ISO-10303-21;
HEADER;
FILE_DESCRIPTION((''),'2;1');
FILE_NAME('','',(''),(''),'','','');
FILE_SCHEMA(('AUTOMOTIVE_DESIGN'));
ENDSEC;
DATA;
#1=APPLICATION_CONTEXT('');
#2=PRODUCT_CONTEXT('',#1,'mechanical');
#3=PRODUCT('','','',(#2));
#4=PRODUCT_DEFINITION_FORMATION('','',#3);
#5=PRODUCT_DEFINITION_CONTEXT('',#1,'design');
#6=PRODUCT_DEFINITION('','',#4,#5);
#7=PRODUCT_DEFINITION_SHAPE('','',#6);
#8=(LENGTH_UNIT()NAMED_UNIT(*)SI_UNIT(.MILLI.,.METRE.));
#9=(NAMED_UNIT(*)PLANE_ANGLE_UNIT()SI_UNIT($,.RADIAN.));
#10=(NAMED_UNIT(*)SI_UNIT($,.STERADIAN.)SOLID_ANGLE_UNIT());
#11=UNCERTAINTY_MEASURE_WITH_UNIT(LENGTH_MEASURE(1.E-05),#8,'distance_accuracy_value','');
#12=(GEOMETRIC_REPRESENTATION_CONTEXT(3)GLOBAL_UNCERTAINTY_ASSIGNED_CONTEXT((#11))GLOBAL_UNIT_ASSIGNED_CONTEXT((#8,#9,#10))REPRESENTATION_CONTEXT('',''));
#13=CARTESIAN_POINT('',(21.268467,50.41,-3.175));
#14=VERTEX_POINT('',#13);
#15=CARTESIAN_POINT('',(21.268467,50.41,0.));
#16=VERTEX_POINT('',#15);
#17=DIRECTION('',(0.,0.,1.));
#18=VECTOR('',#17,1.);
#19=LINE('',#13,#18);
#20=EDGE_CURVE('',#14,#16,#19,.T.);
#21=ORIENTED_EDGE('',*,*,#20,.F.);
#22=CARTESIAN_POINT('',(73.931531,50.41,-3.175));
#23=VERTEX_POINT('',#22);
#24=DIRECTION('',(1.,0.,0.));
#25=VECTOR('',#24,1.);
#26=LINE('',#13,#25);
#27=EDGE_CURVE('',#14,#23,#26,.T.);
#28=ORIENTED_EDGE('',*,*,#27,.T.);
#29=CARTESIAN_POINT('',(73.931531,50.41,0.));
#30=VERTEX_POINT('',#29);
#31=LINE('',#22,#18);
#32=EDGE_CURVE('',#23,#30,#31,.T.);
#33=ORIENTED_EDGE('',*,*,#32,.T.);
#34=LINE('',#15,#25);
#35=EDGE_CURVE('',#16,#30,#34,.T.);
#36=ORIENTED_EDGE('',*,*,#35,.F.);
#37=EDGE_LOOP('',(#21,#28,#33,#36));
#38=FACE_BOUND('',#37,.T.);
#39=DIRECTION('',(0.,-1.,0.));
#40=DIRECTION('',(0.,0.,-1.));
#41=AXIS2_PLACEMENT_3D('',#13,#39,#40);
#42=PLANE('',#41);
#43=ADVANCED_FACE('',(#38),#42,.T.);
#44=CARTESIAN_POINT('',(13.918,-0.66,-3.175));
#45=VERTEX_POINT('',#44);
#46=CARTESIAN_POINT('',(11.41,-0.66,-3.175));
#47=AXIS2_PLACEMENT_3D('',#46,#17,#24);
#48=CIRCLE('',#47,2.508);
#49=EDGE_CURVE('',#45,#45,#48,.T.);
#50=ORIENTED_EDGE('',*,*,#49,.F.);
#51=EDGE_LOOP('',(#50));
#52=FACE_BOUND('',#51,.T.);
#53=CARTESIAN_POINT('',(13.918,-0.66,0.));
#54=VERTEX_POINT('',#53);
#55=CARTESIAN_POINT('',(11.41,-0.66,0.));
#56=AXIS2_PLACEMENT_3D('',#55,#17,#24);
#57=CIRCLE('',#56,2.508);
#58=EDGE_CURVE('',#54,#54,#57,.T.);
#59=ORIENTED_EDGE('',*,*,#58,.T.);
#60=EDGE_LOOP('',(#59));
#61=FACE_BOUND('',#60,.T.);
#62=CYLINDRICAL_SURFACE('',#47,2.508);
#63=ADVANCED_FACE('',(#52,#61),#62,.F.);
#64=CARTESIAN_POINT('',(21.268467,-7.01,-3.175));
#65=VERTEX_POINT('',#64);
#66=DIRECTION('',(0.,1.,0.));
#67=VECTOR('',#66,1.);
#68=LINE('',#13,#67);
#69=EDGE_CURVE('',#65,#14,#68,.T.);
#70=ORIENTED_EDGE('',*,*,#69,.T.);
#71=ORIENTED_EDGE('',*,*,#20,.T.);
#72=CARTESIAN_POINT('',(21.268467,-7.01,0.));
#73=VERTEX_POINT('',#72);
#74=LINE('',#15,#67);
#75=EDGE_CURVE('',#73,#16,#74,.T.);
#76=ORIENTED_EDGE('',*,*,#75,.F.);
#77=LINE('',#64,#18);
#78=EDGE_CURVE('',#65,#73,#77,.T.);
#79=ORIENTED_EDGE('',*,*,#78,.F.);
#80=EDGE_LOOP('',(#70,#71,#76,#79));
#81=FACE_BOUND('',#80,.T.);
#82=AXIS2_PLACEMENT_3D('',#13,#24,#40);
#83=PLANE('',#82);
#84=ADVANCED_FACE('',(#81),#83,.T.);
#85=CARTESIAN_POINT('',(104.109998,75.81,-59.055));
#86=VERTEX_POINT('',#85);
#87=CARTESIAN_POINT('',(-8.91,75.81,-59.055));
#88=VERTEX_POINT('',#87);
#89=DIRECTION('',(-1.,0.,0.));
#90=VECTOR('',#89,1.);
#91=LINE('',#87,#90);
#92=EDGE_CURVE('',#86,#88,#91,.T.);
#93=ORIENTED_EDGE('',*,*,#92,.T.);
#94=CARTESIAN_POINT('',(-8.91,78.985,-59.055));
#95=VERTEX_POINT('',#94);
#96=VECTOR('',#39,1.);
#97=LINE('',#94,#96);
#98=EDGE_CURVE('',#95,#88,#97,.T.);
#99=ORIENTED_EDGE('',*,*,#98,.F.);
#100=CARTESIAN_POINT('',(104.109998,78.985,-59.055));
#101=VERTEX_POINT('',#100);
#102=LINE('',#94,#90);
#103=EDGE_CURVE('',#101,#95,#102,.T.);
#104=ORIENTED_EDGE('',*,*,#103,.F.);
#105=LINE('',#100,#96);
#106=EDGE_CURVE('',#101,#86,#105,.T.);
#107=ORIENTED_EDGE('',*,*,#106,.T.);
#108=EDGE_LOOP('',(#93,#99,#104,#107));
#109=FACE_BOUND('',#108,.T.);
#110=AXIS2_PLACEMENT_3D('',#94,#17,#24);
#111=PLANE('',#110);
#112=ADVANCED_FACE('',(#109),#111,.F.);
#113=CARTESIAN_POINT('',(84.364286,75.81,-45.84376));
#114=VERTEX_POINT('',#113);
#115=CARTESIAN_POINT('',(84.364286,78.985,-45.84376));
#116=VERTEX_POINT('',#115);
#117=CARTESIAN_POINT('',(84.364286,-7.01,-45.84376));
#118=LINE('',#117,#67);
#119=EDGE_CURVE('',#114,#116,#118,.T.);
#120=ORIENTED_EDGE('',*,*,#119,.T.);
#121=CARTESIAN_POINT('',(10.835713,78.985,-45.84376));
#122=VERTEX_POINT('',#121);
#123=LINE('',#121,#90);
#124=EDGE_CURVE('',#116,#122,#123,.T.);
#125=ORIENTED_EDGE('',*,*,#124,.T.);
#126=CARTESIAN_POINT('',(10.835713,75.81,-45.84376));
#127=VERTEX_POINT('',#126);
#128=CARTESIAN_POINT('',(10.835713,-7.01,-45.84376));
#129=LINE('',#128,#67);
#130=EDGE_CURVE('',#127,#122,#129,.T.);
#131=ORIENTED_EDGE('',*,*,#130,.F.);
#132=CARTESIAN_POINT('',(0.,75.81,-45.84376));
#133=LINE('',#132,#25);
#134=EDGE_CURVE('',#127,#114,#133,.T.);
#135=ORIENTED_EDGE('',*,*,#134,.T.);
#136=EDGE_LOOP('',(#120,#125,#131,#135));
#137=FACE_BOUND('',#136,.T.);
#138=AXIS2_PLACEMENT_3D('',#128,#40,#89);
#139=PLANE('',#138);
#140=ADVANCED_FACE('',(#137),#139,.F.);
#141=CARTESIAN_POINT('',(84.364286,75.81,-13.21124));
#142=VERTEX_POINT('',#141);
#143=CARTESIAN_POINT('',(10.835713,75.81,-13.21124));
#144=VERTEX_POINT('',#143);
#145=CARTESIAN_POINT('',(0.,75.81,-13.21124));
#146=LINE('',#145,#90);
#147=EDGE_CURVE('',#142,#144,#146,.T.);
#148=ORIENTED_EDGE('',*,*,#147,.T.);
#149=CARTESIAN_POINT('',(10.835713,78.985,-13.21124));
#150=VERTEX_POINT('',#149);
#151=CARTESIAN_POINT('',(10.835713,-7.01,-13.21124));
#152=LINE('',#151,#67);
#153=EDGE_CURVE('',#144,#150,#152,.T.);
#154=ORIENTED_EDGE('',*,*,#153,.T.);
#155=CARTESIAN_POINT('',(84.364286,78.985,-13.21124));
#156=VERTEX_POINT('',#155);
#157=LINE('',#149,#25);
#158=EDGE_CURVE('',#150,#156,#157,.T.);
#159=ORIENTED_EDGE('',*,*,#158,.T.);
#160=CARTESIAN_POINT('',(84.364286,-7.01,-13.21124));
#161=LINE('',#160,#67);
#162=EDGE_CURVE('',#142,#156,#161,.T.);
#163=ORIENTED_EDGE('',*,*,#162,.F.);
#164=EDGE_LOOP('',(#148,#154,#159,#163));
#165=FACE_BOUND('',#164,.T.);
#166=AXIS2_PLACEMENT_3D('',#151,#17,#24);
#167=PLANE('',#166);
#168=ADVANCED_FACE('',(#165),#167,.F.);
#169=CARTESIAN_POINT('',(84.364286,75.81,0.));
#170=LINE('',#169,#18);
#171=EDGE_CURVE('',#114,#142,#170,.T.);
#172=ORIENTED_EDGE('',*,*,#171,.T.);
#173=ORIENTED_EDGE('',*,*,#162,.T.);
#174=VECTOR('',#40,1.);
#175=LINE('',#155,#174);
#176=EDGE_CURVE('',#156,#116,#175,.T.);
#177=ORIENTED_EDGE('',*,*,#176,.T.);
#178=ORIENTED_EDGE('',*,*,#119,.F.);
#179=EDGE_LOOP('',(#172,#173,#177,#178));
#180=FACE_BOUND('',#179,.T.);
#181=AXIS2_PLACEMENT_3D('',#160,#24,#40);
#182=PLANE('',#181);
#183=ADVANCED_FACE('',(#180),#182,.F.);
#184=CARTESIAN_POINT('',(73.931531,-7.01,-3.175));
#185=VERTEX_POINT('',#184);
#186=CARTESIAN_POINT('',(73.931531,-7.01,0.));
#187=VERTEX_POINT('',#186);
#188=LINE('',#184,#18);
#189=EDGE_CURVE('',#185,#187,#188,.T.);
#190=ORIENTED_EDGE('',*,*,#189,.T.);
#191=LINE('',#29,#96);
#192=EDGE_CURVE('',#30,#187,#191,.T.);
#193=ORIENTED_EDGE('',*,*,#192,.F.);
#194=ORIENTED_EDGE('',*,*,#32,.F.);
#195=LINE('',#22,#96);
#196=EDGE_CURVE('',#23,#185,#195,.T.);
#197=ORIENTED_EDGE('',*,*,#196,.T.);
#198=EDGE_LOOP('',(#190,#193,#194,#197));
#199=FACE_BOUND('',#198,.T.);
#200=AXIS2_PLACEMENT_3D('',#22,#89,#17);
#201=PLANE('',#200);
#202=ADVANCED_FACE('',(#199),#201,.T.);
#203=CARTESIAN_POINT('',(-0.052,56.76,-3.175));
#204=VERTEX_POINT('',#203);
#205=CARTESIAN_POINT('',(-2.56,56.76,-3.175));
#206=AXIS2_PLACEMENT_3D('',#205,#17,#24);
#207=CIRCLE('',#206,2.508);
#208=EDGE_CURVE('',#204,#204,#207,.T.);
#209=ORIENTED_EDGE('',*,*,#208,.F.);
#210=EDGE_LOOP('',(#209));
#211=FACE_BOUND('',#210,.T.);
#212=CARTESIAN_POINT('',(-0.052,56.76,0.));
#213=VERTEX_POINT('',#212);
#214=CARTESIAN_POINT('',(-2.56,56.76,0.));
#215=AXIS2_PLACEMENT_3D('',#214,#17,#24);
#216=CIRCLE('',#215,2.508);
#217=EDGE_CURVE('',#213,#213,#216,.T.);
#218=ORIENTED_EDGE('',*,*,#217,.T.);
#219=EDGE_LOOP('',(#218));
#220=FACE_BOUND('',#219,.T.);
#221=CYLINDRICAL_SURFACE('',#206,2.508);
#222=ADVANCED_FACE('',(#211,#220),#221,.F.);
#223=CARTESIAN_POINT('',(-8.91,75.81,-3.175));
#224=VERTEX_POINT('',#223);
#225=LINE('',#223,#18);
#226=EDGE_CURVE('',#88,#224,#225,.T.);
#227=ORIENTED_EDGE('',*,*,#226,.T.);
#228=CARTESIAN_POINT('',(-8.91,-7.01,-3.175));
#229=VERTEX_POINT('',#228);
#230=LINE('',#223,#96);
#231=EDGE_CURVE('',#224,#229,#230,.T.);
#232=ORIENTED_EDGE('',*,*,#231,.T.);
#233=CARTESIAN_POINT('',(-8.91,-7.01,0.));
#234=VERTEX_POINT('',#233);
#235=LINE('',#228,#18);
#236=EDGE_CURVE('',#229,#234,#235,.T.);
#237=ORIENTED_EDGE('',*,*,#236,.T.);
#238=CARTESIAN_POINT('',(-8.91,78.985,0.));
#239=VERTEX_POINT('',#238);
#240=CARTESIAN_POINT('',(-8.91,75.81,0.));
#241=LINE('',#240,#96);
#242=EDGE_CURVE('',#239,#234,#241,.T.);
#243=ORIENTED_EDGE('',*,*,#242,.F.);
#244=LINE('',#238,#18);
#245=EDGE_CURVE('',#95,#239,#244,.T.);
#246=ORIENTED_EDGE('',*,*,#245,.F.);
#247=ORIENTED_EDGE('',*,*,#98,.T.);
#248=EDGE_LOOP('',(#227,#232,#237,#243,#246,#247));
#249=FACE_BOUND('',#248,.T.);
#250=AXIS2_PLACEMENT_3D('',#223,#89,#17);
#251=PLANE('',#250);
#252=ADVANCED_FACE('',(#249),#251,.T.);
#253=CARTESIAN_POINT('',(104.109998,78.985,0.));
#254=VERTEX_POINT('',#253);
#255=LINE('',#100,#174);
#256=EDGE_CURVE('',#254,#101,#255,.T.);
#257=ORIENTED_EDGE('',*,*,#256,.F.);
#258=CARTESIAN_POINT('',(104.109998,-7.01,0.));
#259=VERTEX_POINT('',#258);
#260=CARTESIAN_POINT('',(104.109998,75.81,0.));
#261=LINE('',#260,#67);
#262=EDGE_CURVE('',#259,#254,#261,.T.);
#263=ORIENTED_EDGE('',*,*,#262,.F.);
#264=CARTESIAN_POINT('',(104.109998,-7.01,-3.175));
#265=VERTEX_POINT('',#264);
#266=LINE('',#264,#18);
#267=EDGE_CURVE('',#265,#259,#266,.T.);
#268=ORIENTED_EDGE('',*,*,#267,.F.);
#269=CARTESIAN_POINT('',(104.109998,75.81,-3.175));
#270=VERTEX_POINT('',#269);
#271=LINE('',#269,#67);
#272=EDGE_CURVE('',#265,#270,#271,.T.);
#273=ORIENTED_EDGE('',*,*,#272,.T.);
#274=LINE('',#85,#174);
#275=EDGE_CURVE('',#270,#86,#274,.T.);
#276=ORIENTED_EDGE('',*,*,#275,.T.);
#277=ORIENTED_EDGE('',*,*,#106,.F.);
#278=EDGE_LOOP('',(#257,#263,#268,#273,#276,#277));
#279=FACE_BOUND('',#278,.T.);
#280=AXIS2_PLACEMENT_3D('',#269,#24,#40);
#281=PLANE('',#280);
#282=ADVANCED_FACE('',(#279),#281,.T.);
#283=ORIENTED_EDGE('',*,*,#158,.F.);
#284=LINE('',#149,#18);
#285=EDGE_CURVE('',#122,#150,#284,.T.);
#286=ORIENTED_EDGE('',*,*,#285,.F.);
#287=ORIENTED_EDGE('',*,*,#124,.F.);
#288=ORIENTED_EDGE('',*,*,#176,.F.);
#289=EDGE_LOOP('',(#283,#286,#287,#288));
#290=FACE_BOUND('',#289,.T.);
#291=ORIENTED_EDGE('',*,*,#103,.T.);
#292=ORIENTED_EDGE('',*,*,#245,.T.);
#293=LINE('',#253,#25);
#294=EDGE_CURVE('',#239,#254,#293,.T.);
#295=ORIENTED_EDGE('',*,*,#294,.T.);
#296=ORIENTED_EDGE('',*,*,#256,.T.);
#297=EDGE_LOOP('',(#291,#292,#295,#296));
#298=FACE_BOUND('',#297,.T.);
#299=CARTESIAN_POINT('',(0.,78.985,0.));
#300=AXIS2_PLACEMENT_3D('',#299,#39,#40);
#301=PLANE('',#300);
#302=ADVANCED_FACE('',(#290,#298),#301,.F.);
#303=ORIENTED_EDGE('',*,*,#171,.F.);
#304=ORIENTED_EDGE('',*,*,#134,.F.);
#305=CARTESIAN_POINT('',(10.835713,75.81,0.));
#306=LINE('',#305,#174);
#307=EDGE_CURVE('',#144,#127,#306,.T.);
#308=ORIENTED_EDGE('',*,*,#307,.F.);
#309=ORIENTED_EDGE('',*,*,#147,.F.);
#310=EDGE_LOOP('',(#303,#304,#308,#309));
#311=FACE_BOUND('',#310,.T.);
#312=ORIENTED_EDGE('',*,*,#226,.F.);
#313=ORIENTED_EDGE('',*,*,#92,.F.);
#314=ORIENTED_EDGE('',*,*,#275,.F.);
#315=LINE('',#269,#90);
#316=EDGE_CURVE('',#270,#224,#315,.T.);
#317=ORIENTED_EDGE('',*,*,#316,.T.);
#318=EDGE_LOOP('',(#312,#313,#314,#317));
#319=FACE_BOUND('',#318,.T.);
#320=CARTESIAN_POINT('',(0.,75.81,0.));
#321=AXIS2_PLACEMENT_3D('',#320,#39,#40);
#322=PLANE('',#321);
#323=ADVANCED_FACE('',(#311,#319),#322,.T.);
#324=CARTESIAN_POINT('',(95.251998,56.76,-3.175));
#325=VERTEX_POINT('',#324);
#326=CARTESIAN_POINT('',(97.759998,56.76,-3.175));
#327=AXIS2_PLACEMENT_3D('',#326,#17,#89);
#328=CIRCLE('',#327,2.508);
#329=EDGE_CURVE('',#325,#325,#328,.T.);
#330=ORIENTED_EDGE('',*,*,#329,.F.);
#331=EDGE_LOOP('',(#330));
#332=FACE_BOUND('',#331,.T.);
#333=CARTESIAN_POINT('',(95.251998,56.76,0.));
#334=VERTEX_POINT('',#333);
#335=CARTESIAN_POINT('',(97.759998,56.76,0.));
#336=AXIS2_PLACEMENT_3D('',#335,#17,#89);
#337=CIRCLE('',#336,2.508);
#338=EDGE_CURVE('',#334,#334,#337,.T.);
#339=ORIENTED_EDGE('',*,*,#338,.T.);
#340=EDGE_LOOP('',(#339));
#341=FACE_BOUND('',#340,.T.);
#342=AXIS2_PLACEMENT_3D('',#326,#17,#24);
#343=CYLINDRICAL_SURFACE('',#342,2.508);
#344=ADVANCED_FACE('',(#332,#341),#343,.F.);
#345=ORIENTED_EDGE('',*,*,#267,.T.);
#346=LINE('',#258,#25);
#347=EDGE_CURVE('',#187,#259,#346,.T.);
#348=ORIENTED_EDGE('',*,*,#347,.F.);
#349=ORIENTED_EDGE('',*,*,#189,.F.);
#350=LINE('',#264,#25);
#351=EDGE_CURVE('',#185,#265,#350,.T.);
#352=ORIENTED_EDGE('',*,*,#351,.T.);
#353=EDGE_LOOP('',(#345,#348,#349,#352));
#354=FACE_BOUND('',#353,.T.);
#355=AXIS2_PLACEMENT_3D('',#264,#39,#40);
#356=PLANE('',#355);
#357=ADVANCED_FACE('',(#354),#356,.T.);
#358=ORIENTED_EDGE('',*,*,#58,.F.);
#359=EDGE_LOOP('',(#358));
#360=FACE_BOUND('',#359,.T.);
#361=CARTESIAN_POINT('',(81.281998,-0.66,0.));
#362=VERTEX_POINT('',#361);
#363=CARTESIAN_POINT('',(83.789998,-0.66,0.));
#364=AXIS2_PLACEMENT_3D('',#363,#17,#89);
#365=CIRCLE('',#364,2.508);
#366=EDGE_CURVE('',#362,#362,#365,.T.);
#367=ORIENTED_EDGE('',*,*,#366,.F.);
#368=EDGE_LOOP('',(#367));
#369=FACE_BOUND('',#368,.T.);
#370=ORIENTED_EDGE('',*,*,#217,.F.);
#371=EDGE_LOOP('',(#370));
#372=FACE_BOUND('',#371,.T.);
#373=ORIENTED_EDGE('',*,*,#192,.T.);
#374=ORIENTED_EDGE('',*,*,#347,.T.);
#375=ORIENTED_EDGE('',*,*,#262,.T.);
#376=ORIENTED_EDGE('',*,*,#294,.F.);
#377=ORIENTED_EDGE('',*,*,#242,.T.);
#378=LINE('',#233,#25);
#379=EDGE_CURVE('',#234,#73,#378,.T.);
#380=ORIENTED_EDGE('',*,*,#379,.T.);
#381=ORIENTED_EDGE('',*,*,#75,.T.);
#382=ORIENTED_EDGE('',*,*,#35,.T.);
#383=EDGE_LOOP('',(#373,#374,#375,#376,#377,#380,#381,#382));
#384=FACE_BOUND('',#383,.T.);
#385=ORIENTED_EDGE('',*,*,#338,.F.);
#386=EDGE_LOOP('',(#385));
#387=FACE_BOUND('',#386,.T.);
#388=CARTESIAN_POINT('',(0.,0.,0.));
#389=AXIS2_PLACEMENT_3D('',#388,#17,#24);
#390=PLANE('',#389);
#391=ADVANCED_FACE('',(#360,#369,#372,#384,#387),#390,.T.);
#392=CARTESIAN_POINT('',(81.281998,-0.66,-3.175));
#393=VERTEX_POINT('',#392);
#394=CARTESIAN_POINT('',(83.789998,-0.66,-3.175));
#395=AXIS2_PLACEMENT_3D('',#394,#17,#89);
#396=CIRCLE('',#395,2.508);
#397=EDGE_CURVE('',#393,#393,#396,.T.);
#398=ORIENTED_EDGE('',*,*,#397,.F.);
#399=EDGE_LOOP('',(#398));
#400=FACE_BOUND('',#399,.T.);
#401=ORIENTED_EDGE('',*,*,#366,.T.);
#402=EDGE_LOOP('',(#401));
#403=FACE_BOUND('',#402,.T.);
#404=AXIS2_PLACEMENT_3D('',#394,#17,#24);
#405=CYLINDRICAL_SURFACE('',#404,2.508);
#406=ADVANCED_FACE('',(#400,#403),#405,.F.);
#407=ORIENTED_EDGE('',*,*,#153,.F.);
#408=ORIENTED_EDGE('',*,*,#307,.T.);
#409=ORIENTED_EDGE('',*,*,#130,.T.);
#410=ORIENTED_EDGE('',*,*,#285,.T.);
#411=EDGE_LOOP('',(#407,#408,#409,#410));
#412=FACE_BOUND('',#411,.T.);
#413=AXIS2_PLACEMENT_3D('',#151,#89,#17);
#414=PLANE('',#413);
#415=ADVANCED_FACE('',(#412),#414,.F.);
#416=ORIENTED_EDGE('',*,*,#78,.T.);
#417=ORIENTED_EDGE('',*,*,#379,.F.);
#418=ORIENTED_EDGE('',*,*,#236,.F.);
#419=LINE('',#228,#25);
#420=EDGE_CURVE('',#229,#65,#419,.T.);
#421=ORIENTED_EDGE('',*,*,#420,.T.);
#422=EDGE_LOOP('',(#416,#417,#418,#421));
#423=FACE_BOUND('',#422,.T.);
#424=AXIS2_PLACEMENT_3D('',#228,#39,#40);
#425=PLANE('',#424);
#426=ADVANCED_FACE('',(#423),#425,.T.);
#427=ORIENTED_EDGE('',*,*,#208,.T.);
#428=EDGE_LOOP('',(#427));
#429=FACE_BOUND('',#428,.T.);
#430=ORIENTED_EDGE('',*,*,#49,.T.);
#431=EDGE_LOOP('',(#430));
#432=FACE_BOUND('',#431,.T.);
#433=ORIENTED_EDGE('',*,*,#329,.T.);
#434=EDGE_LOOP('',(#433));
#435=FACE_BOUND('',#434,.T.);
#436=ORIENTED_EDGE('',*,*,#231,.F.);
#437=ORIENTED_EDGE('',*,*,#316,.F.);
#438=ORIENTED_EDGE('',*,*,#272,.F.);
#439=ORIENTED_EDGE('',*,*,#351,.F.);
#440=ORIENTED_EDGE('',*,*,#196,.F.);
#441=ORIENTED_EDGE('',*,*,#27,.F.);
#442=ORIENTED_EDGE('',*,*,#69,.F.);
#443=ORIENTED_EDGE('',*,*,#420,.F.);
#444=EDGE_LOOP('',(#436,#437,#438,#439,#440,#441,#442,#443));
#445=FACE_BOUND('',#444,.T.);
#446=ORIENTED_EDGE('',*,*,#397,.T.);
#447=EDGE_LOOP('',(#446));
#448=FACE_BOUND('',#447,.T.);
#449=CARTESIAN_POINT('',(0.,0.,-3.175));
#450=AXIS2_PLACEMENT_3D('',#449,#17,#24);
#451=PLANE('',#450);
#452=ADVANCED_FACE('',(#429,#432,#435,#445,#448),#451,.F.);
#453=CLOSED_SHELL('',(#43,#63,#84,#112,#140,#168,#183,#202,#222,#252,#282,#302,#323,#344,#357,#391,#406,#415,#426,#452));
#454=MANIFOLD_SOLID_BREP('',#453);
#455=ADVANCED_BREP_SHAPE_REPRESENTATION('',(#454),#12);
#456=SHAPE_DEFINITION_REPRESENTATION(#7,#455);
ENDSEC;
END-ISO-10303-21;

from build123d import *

# Parameters (mm, degrees)
SKETCH1_R           = 2.508000064
BASE_FLANGE1_DEPTH  = 3.175
BOSS_EXTRUDE1_DEPTH = 3.175
SKETCH10_W          = 73.528573301
SKETCH10_H          = 32.63252049
CUT_EXTRUDE1_DEPTH  = 148.382240559


# Sheet-metal steps are written as plain solids
with BuildPart() as part:
    # Sketch1 → Base-Flange1 (new body)
    with BuildSketch(Plane.XY):
        Polygon((-8.910000095, 75.81), (21.268467492, 75.81), (73.931530887, 75.81), (104.109998474, 75.81), (104.109998474, -7.01), (73.931530887, -7.01), (73.931530887, 50.41), (21.268467492, 50.41), (21.268467492, -7.01), (-8.910000095, -7.01), align=None)
        with Locations((-2.560000095, 56.76)):
            Circle(SKETCH1_R, mode=Mode.SUBTRACT)
        with Locations((11.409999905, -0.66)):
            Circle(SKETCH1_R, mode=Mode.SUBTRACT)
        with Locations(Location((83.789998474, -0.66, 0), (0, 0, 180))):
            Circle(SKETCH1_R, mode=Mode.SUBTRACT)
        with Locations(Location((97.759998474, 56.76, 0), (0, 0, 180))):
            Circle(SKETCH1_R, mode=Mode.SUBTRACT)
    extrude(amount=-BASE_FLANGE1_DEPTH)

    # Sketch9 → Boss-Extrude1 (add)
    with BuildSketch(Plane(origin=(0, 75.81, 0), x_dir=(1, 0, 0), z_dir=(0, 1, 0))):
        Polygon((-8.910000095, 3.175), (-8.910000095, 59.055), (104.109998474, 59.055), (104.109998474, 0), (-8.910000095, 0), align=None)
    extrude(amount=BOSS_EXTRUDE1_DEPTH)

    # Sketch10 → Cut-Extrude1 (cut, through all)
    with BuildSketch(Plane(origin=(0, 78.985, 0), x_dir=(1, 0, 0), z_dir=(0, 1, 0))):
        with Locations((47.59999919, 29.5275)):
            Rectangle(SKETCH10_W, SKETCH10_H)
    extrude(amount=-CUT_EXTRUDE1_DEPTH, mode=Mode.SUBTRACT)


solid = part.part
